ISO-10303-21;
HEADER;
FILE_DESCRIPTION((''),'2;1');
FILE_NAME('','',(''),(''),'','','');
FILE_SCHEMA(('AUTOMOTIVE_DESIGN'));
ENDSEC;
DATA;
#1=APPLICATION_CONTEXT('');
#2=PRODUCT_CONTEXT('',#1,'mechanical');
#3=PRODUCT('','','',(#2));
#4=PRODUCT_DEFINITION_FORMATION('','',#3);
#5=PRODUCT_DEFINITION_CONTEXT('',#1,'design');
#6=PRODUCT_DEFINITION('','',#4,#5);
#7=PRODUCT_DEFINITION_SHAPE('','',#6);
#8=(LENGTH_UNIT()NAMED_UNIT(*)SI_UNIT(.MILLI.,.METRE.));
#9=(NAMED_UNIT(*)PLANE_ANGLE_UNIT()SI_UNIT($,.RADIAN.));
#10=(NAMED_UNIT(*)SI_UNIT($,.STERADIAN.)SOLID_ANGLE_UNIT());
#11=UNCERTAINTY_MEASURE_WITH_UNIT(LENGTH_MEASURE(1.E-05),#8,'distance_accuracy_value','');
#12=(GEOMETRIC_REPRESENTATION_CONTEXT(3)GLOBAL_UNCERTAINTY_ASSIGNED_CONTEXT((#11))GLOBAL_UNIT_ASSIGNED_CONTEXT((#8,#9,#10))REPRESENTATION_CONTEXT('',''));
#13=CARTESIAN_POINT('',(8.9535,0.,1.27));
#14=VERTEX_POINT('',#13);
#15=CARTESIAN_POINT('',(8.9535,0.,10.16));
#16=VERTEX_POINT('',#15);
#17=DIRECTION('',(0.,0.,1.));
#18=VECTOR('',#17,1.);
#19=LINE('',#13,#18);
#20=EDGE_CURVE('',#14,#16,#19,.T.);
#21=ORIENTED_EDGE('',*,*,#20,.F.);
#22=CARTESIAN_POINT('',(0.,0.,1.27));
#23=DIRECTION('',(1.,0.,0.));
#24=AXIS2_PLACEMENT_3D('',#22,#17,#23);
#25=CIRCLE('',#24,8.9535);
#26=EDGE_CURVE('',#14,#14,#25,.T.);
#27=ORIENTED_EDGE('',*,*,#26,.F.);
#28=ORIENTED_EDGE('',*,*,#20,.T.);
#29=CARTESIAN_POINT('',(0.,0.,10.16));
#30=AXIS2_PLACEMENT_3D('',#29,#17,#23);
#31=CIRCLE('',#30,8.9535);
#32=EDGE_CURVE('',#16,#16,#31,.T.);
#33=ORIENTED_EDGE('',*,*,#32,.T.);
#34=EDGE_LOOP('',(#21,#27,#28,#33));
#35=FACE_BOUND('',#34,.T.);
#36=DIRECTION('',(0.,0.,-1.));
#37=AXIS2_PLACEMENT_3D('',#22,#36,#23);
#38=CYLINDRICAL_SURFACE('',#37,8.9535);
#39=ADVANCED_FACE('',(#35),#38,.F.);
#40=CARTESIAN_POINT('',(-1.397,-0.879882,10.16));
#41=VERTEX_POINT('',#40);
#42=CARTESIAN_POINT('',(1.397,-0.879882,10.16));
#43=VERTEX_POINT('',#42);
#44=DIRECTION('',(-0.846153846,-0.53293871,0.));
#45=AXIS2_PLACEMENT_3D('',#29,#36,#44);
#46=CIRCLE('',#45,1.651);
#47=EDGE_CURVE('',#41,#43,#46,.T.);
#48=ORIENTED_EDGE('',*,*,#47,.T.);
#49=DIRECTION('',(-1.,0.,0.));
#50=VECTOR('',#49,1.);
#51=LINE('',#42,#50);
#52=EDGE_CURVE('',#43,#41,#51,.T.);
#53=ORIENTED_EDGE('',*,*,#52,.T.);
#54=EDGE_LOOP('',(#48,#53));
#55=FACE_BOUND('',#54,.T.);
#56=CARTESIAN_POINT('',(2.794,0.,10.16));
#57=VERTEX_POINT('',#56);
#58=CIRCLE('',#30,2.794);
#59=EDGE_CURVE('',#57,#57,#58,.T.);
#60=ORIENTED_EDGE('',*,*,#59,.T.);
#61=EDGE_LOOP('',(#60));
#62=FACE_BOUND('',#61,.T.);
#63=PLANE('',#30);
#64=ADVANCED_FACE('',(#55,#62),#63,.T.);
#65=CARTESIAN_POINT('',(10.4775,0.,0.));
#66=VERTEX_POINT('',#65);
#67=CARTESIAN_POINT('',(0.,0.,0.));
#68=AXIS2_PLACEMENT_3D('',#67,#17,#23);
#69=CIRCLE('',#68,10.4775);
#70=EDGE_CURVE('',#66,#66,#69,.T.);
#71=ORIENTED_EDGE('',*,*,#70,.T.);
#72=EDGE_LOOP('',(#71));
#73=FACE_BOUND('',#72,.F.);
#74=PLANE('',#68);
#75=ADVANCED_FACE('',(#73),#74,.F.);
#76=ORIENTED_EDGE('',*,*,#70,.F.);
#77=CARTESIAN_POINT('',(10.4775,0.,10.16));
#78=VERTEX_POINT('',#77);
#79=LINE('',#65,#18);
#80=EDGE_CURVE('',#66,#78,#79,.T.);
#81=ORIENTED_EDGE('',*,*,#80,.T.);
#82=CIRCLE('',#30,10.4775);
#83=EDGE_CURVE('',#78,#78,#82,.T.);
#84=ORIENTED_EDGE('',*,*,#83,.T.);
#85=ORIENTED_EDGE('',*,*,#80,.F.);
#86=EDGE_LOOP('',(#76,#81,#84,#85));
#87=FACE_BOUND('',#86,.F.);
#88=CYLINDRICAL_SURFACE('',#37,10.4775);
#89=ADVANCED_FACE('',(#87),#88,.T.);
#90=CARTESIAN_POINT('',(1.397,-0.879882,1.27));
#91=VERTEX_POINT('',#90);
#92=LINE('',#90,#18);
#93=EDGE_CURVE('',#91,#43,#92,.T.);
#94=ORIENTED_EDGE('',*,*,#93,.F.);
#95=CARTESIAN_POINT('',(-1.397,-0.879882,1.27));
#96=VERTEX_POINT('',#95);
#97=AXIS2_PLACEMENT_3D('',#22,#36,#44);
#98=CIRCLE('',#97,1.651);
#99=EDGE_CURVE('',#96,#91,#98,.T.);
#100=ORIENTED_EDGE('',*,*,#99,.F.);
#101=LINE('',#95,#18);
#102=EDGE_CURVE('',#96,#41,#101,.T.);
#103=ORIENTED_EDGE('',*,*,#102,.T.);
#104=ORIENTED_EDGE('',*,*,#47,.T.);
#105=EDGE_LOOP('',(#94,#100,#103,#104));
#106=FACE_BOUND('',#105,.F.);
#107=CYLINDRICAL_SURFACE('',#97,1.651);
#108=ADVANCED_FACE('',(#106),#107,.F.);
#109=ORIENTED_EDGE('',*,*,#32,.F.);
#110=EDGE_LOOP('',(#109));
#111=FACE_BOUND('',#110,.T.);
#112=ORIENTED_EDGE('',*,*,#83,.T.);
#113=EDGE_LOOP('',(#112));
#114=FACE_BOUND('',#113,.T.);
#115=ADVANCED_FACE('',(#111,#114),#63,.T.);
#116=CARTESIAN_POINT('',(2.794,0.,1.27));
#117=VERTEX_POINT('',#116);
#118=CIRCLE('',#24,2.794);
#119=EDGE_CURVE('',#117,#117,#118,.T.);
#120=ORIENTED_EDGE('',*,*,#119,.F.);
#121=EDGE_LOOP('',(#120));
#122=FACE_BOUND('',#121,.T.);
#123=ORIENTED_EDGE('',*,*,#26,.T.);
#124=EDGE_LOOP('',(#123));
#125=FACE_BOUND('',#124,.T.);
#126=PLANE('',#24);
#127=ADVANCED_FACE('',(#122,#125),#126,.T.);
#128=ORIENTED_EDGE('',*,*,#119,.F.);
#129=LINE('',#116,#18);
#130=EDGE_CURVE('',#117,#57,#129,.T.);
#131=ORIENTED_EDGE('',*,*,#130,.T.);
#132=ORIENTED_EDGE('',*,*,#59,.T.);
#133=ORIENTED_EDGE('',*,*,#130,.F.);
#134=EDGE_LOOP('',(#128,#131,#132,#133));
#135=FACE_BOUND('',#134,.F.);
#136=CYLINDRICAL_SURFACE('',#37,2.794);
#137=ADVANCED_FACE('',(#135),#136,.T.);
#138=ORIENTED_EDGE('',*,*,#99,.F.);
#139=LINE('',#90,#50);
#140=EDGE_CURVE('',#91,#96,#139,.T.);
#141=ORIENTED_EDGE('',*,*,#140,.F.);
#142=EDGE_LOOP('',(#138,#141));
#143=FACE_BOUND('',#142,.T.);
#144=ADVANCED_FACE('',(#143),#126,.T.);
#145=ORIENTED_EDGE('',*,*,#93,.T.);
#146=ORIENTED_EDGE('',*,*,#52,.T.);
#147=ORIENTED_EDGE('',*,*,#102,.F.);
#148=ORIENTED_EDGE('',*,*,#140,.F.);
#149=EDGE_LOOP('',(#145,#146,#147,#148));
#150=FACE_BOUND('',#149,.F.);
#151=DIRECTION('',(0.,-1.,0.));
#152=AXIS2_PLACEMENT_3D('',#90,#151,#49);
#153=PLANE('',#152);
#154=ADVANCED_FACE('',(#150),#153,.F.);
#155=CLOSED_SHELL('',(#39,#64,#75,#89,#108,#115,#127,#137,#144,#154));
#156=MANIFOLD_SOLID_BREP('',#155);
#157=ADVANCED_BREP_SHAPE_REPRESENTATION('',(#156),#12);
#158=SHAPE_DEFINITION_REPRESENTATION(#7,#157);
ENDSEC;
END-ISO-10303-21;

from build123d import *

# Parameters (mm, degrees)
F0_R     = 10.4775
F1_DEPTH = 1.27
F2_R     = 10.4775
F2_R_2   = 8.9535
F2_R_3   = 2.794
F3_DEPTH = 8.89


# Not quite as in the source:
# - the program builds the solid bodies; features that only make, move or delete a surface that nothing else refers to are left out


with BuildPart() as f1:
    # F0 (on Top) → F1 (new body)
    with BuildSketch(Plane.XY):
        Circle(F0_R)
    extrude(amount=F1_DEPTH)

    # F2 (on face) → F3 (join)
    with BuildSketch(Plane.XY.offset(1.27)):
        Circle(F2_R)
        Circle(F2_R_2, mode=Mode.SUBTRACT)
        Circle(F2_R_3)
        with BuildLine():
            ThreePointArc((-1.397, -0.8798818102), (0, 1.651), (1.397, -0.8798818102))
            Line((1.397, -0.8798818102), (-1.397, -0.8798818102))
        make_face(mode=Mode.SUBTRACT)
    extrude(amount=F3_DEPTH)


solid = f1.part
